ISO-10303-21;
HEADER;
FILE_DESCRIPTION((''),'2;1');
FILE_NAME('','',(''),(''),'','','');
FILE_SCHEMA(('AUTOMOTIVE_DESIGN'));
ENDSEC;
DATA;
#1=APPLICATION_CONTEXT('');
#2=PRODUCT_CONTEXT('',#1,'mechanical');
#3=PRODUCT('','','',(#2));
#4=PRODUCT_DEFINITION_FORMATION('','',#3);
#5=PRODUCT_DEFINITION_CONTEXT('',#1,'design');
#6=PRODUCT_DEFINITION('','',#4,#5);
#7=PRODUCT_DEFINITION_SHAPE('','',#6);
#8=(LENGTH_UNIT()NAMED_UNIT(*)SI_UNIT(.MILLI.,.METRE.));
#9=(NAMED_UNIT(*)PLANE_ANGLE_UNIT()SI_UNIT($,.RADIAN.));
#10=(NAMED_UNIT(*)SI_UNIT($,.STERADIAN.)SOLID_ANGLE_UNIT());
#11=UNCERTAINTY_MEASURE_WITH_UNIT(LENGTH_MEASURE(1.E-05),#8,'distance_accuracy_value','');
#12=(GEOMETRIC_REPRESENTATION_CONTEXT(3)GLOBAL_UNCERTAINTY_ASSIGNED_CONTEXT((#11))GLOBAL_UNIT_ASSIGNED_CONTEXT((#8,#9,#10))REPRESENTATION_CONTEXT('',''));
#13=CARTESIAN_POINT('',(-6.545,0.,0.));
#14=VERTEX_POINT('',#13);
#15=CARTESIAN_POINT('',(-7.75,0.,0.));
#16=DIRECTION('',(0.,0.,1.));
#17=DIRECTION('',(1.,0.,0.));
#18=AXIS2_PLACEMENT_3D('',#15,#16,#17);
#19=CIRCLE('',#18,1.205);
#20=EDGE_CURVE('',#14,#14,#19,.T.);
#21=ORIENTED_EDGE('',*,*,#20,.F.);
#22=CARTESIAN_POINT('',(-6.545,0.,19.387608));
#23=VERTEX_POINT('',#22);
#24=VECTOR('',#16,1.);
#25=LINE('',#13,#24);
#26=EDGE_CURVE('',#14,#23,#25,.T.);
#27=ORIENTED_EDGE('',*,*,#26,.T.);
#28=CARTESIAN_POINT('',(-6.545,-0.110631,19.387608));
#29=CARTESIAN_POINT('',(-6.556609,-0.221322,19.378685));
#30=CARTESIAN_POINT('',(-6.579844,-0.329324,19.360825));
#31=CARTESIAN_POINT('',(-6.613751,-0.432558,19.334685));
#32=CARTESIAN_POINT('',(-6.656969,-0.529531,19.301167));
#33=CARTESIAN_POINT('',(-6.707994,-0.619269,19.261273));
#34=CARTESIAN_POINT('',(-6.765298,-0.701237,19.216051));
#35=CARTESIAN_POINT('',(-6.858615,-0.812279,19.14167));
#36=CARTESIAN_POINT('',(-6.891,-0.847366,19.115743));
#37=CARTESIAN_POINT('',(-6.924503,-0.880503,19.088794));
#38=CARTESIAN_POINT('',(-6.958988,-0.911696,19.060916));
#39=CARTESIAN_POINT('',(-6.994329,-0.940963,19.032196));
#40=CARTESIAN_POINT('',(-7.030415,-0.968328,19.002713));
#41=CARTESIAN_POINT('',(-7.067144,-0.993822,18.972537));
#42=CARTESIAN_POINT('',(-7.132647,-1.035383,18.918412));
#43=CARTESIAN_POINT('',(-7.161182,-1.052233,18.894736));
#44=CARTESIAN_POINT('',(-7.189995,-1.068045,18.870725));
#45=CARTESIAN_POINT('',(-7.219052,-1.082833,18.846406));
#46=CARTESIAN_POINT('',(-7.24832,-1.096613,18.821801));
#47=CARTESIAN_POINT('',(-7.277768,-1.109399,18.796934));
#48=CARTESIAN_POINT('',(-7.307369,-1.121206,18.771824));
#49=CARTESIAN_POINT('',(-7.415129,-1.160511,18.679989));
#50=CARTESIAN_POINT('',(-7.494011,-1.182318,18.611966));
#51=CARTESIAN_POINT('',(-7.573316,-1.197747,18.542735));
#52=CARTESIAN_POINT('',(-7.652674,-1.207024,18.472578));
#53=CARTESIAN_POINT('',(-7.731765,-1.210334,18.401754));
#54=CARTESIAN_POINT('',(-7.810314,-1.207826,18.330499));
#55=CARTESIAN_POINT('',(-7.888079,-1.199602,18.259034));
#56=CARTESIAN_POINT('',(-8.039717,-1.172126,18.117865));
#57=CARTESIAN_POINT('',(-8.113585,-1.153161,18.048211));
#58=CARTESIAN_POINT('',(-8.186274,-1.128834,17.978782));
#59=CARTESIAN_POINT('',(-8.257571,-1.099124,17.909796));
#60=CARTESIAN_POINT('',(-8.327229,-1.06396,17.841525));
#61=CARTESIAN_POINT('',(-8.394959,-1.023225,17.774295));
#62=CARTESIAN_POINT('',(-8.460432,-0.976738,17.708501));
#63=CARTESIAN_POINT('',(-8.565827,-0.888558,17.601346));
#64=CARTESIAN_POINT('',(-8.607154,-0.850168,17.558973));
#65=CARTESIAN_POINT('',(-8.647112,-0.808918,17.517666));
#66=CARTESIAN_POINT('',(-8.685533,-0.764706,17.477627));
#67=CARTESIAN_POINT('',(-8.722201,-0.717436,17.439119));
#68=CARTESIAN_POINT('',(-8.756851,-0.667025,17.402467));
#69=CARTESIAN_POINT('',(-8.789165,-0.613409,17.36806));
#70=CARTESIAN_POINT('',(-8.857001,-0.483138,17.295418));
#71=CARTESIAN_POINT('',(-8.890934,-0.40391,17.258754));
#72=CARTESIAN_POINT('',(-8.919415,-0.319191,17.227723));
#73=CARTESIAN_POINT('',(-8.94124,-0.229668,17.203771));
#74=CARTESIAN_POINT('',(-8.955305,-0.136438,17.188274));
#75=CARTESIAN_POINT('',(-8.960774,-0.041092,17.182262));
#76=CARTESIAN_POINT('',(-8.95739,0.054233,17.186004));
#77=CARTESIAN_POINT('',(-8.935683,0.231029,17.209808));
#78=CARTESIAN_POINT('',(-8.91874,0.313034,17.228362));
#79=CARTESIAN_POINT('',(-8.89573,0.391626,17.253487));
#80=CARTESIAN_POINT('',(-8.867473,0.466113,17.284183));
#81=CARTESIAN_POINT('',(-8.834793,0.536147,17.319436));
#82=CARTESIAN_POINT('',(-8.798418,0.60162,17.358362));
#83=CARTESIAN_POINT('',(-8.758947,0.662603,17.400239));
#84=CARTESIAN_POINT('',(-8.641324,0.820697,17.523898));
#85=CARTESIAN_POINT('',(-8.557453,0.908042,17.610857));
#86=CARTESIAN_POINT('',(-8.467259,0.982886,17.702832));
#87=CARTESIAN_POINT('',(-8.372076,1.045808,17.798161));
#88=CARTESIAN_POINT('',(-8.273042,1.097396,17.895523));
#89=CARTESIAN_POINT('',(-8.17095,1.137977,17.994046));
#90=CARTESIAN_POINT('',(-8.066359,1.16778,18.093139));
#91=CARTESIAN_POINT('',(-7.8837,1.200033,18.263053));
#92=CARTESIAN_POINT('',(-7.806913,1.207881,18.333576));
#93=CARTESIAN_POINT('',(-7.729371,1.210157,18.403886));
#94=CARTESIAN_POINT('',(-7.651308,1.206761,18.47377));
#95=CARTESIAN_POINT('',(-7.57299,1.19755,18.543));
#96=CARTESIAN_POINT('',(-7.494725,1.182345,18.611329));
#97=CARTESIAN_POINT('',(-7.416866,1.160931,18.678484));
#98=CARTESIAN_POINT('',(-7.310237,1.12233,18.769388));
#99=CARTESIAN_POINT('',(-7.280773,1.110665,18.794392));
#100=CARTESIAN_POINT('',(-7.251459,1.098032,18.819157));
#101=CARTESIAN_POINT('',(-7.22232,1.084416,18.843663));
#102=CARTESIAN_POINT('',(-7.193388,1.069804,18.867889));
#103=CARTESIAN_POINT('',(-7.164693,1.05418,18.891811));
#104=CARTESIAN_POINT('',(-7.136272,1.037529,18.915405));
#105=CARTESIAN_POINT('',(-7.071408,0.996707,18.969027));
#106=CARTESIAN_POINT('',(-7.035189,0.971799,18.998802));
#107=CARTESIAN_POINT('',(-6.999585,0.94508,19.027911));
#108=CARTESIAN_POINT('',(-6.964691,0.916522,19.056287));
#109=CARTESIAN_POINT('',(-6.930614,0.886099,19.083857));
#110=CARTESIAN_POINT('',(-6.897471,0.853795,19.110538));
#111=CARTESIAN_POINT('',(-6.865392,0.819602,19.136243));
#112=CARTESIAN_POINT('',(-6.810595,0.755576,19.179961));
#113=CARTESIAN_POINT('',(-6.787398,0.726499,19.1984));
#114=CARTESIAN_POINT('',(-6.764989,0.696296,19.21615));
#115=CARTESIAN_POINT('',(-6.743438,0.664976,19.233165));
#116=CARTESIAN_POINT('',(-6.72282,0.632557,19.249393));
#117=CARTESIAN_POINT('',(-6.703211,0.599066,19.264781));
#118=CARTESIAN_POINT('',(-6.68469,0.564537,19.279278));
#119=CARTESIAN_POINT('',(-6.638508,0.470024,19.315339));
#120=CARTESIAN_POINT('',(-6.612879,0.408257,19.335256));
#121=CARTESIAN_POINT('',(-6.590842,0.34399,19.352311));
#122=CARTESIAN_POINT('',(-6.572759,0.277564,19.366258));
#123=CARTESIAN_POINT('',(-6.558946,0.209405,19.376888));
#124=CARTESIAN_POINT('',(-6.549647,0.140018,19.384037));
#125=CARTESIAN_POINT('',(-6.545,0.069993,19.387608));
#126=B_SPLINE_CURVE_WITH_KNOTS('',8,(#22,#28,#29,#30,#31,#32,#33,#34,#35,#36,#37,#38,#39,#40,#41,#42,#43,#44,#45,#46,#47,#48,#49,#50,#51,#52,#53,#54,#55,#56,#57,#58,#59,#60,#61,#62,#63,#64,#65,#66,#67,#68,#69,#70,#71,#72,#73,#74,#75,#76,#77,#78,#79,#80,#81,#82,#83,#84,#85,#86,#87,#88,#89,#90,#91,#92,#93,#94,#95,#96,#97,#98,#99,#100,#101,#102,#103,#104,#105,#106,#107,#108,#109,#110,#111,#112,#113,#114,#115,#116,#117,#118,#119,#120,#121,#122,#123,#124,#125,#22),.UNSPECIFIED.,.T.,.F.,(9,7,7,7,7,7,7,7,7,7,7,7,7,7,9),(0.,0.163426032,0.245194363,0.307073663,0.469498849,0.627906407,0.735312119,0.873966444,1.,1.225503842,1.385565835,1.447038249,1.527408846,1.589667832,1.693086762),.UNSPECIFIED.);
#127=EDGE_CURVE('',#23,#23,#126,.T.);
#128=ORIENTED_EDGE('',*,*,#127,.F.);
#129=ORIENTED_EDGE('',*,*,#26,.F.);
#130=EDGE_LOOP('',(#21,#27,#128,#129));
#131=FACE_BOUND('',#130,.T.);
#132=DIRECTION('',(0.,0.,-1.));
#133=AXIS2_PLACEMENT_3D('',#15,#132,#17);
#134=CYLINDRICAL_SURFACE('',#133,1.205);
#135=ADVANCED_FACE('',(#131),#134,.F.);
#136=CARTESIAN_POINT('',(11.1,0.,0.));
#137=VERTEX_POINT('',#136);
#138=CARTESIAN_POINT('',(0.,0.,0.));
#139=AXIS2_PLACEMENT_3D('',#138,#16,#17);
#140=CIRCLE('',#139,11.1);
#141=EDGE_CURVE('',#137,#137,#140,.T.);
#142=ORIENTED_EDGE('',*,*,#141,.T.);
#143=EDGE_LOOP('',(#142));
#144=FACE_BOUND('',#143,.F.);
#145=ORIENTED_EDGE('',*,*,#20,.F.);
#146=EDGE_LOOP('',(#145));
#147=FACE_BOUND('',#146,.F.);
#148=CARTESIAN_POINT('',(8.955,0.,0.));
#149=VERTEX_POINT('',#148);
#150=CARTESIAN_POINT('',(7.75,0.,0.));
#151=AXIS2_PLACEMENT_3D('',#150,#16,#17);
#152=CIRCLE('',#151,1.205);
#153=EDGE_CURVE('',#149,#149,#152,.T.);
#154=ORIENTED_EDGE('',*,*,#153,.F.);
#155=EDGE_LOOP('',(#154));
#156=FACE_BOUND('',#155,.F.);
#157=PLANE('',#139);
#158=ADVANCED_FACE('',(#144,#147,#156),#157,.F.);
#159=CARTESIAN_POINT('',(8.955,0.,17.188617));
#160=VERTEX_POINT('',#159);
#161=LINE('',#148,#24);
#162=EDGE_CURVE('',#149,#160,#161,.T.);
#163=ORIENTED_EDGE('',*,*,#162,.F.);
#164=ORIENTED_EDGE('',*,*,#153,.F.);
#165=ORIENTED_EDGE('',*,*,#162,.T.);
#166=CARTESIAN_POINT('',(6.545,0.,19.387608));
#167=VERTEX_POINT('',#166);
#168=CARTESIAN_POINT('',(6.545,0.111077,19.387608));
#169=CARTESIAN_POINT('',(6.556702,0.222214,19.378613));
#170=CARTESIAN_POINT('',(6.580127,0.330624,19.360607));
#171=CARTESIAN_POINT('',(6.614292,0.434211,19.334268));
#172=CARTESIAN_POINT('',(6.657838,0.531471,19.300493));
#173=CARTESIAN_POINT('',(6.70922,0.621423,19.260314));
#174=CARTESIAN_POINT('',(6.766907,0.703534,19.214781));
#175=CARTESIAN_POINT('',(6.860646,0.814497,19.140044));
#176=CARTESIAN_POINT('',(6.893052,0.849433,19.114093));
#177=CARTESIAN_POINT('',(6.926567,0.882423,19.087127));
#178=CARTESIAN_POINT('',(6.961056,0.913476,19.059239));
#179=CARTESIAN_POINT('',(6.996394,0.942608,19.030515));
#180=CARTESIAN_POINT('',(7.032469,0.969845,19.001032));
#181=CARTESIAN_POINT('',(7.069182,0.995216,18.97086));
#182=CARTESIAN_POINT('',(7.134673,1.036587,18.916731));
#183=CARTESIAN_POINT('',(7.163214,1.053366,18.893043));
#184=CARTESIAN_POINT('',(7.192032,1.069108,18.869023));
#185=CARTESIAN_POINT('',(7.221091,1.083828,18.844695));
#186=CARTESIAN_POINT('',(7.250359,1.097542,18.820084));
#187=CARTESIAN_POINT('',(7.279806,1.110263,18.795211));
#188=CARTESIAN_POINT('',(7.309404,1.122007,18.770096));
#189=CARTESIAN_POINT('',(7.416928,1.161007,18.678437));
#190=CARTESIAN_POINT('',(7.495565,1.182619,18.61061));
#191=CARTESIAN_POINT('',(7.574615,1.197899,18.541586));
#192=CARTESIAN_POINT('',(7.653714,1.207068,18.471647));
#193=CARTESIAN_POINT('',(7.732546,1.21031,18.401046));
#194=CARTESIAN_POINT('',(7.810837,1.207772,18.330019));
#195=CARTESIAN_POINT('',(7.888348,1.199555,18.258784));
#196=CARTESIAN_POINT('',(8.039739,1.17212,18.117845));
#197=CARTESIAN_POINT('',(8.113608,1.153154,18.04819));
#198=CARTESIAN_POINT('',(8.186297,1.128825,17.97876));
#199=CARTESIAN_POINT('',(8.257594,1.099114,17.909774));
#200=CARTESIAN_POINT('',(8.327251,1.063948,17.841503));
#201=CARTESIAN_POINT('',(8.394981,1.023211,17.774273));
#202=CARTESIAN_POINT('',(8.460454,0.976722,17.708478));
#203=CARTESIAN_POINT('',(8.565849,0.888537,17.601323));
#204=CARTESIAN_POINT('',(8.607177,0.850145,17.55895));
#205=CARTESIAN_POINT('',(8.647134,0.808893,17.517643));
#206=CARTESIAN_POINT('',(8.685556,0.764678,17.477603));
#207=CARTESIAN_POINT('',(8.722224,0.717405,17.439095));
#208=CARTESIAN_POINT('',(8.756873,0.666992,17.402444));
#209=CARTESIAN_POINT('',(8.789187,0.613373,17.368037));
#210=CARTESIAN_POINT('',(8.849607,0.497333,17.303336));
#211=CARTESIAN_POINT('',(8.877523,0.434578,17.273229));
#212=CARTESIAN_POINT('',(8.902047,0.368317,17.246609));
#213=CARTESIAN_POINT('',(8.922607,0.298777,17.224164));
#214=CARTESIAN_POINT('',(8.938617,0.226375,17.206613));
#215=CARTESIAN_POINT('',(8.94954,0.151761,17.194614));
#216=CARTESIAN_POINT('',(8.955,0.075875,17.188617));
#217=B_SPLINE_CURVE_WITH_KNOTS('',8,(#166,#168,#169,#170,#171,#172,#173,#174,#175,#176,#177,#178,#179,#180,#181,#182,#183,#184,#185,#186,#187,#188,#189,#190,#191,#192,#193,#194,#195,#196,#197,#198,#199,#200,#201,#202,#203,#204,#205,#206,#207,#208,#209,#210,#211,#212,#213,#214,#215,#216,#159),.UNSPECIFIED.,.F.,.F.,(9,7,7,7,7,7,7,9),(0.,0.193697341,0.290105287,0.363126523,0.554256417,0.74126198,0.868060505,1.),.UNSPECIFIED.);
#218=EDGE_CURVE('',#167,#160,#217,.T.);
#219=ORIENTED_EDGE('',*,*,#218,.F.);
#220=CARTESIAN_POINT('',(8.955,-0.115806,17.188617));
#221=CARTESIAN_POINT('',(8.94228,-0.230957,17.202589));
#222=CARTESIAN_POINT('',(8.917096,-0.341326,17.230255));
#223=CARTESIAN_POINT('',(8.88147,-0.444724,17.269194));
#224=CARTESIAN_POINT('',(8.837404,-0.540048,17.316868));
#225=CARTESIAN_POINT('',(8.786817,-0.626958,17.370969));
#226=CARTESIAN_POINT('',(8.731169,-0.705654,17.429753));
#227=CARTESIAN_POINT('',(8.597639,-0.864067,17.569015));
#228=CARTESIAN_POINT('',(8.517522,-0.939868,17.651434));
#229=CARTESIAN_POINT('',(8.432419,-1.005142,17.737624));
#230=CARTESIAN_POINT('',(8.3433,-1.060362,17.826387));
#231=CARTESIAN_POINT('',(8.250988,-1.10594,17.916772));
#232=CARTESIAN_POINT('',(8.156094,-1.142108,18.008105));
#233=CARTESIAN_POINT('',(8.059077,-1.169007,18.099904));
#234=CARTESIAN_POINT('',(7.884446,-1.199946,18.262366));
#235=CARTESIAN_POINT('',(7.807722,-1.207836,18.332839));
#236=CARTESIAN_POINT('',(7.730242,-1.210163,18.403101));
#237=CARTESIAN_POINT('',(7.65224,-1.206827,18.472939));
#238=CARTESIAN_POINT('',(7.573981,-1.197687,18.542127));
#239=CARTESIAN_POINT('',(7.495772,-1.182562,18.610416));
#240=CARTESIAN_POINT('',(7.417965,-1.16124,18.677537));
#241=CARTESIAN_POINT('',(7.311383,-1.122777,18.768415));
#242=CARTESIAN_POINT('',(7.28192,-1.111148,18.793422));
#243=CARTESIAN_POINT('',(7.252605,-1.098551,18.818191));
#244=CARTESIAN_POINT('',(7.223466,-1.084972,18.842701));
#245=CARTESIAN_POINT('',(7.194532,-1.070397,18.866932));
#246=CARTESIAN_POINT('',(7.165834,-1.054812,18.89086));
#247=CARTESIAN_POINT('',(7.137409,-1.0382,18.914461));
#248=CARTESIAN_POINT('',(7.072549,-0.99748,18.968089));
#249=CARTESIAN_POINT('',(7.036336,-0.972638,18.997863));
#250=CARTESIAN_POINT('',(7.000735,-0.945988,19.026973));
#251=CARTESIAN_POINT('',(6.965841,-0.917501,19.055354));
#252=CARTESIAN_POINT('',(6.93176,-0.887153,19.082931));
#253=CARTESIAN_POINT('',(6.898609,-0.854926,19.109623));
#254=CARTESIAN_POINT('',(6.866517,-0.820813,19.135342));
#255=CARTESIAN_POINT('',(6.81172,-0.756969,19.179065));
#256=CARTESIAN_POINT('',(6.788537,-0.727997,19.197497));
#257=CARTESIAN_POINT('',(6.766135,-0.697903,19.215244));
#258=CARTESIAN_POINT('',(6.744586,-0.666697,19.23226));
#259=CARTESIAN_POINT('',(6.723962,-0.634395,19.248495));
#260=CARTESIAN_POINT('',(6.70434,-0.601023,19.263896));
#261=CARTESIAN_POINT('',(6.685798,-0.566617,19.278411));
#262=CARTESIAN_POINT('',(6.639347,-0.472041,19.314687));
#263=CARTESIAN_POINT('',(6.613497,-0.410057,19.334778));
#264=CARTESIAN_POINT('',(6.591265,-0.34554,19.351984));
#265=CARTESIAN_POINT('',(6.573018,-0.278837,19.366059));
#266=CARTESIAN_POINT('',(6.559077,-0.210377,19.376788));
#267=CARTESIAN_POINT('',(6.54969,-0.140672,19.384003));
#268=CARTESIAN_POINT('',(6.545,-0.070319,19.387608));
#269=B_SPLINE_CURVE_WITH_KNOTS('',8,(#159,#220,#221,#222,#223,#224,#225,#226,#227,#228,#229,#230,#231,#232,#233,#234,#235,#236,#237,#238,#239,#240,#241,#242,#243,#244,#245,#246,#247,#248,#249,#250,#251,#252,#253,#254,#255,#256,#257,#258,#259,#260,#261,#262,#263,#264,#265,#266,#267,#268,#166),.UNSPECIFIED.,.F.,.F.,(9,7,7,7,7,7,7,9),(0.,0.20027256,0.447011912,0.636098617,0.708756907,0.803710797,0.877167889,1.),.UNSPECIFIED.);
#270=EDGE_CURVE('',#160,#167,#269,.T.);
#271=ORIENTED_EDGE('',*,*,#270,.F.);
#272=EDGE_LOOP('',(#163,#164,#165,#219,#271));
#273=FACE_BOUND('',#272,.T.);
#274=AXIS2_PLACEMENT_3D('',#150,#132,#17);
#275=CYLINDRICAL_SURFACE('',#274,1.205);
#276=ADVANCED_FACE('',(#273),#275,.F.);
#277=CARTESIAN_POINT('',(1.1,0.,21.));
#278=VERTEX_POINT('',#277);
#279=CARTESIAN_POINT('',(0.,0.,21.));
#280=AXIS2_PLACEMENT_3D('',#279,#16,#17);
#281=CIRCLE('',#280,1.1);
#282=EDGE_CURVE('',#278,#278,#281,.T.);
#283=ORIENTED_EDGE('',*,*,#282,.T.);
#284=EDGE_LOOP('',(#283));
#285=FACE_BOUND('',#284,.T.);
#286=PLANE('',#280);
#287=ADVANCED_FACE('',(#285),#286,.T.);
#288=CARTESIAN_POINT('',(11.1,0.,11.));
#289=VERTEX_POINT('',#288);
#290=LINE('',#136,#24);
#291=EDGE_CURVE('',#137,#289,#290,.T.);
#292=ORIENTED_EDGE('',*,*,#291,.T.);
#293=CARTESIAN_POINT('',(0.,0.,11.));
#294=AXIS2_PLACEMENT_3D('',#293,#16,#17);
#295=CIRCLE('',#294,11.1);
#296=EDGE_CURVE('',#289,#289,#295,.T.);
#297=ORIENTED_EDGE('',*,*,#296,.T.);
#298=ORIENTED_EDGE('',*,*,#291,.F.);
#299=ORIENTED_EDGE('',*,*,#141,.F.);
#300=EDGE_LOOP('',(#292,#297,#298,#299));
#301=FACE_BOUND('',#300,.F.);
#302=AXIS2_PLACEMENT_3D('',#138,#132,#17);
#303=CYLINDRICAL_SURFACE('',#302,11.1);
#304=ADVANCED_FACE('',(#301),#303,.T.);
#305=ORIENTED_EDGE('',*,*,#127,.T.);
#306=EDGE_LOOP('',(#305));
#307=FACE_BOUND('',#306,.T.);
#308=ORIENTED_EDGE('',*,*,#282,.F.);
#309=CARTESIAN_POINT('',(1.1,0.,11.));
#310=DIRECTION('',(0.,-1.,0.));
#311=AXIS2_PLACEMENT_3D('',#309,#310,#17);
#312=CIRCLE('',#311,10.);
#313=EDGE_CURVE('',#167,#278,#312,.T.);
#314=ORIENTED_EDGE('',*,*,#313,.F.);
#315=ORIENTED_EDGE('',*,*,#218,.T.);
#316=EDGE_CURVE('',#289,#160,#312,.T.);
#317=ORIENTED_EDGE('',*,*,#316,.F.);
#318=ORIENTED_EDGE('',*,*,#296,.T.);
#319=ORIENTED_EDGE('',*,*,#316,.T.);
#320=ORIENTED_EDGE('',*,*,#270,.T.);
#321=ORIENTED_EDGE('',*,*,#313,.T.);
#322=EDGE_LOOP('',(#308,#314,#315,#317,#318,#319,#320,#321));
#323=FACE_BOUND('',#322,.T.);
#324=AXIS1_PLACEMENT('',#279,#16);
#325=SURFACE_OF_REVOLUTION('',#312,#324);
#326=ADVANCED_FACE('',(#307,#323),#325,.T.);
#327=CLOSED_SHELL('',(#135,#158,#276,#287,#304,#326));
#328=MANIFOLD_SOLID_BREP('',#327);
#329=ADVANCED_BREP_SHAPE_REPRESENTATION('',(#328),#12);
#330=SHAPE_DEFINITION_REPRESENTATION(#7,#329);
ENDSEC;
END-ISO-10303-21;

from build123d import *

# Parameters (mm, degrees)
F0_R     = 11.1
F0_R_2   = 1.205
F1_DEPTH = 21


# Not quite as in the source:
# - a fillet or chamfer that OpenCascade refuses, or shapes differently, is made with other operations: its cross-section is extruded or revolved along the edge and cut away or added


with BuildPart() as f1:
    # F0 (on Top) → F1 (new body)
    with BuildSketch(Plane.XY):
        Circle(F0_R)
        with Locations((-7.75, 0)):
            Circle(F0_R_2, mode=Mode.SUBTRACT)
        with Locations((7.75, 0)):
            Circle(F0_R_2, mode=Mode.SUBTRACT)
    extrude(amount=F1_DEPTH)

    # F2: fillet of radius 10 on 1 edges, made by hand

    # F2_s1 → F2_t2 (revolve, cut)
    with BuildSketch(Plane.XZ):
        with BuildLine():
            ThreePointArc((11.1, 11), (8.1710678119, 18.0710678119), (1.1, 21))
            Line((1.1, 21), (11.1, 21))
            Line((11.1, 21), (11.1, 11))
        make_face()
    revolve(axis=Axis((0, 0, 21), (0, 0, 1)), mode=Mode.SUBTRACT)


solid = f1.part
